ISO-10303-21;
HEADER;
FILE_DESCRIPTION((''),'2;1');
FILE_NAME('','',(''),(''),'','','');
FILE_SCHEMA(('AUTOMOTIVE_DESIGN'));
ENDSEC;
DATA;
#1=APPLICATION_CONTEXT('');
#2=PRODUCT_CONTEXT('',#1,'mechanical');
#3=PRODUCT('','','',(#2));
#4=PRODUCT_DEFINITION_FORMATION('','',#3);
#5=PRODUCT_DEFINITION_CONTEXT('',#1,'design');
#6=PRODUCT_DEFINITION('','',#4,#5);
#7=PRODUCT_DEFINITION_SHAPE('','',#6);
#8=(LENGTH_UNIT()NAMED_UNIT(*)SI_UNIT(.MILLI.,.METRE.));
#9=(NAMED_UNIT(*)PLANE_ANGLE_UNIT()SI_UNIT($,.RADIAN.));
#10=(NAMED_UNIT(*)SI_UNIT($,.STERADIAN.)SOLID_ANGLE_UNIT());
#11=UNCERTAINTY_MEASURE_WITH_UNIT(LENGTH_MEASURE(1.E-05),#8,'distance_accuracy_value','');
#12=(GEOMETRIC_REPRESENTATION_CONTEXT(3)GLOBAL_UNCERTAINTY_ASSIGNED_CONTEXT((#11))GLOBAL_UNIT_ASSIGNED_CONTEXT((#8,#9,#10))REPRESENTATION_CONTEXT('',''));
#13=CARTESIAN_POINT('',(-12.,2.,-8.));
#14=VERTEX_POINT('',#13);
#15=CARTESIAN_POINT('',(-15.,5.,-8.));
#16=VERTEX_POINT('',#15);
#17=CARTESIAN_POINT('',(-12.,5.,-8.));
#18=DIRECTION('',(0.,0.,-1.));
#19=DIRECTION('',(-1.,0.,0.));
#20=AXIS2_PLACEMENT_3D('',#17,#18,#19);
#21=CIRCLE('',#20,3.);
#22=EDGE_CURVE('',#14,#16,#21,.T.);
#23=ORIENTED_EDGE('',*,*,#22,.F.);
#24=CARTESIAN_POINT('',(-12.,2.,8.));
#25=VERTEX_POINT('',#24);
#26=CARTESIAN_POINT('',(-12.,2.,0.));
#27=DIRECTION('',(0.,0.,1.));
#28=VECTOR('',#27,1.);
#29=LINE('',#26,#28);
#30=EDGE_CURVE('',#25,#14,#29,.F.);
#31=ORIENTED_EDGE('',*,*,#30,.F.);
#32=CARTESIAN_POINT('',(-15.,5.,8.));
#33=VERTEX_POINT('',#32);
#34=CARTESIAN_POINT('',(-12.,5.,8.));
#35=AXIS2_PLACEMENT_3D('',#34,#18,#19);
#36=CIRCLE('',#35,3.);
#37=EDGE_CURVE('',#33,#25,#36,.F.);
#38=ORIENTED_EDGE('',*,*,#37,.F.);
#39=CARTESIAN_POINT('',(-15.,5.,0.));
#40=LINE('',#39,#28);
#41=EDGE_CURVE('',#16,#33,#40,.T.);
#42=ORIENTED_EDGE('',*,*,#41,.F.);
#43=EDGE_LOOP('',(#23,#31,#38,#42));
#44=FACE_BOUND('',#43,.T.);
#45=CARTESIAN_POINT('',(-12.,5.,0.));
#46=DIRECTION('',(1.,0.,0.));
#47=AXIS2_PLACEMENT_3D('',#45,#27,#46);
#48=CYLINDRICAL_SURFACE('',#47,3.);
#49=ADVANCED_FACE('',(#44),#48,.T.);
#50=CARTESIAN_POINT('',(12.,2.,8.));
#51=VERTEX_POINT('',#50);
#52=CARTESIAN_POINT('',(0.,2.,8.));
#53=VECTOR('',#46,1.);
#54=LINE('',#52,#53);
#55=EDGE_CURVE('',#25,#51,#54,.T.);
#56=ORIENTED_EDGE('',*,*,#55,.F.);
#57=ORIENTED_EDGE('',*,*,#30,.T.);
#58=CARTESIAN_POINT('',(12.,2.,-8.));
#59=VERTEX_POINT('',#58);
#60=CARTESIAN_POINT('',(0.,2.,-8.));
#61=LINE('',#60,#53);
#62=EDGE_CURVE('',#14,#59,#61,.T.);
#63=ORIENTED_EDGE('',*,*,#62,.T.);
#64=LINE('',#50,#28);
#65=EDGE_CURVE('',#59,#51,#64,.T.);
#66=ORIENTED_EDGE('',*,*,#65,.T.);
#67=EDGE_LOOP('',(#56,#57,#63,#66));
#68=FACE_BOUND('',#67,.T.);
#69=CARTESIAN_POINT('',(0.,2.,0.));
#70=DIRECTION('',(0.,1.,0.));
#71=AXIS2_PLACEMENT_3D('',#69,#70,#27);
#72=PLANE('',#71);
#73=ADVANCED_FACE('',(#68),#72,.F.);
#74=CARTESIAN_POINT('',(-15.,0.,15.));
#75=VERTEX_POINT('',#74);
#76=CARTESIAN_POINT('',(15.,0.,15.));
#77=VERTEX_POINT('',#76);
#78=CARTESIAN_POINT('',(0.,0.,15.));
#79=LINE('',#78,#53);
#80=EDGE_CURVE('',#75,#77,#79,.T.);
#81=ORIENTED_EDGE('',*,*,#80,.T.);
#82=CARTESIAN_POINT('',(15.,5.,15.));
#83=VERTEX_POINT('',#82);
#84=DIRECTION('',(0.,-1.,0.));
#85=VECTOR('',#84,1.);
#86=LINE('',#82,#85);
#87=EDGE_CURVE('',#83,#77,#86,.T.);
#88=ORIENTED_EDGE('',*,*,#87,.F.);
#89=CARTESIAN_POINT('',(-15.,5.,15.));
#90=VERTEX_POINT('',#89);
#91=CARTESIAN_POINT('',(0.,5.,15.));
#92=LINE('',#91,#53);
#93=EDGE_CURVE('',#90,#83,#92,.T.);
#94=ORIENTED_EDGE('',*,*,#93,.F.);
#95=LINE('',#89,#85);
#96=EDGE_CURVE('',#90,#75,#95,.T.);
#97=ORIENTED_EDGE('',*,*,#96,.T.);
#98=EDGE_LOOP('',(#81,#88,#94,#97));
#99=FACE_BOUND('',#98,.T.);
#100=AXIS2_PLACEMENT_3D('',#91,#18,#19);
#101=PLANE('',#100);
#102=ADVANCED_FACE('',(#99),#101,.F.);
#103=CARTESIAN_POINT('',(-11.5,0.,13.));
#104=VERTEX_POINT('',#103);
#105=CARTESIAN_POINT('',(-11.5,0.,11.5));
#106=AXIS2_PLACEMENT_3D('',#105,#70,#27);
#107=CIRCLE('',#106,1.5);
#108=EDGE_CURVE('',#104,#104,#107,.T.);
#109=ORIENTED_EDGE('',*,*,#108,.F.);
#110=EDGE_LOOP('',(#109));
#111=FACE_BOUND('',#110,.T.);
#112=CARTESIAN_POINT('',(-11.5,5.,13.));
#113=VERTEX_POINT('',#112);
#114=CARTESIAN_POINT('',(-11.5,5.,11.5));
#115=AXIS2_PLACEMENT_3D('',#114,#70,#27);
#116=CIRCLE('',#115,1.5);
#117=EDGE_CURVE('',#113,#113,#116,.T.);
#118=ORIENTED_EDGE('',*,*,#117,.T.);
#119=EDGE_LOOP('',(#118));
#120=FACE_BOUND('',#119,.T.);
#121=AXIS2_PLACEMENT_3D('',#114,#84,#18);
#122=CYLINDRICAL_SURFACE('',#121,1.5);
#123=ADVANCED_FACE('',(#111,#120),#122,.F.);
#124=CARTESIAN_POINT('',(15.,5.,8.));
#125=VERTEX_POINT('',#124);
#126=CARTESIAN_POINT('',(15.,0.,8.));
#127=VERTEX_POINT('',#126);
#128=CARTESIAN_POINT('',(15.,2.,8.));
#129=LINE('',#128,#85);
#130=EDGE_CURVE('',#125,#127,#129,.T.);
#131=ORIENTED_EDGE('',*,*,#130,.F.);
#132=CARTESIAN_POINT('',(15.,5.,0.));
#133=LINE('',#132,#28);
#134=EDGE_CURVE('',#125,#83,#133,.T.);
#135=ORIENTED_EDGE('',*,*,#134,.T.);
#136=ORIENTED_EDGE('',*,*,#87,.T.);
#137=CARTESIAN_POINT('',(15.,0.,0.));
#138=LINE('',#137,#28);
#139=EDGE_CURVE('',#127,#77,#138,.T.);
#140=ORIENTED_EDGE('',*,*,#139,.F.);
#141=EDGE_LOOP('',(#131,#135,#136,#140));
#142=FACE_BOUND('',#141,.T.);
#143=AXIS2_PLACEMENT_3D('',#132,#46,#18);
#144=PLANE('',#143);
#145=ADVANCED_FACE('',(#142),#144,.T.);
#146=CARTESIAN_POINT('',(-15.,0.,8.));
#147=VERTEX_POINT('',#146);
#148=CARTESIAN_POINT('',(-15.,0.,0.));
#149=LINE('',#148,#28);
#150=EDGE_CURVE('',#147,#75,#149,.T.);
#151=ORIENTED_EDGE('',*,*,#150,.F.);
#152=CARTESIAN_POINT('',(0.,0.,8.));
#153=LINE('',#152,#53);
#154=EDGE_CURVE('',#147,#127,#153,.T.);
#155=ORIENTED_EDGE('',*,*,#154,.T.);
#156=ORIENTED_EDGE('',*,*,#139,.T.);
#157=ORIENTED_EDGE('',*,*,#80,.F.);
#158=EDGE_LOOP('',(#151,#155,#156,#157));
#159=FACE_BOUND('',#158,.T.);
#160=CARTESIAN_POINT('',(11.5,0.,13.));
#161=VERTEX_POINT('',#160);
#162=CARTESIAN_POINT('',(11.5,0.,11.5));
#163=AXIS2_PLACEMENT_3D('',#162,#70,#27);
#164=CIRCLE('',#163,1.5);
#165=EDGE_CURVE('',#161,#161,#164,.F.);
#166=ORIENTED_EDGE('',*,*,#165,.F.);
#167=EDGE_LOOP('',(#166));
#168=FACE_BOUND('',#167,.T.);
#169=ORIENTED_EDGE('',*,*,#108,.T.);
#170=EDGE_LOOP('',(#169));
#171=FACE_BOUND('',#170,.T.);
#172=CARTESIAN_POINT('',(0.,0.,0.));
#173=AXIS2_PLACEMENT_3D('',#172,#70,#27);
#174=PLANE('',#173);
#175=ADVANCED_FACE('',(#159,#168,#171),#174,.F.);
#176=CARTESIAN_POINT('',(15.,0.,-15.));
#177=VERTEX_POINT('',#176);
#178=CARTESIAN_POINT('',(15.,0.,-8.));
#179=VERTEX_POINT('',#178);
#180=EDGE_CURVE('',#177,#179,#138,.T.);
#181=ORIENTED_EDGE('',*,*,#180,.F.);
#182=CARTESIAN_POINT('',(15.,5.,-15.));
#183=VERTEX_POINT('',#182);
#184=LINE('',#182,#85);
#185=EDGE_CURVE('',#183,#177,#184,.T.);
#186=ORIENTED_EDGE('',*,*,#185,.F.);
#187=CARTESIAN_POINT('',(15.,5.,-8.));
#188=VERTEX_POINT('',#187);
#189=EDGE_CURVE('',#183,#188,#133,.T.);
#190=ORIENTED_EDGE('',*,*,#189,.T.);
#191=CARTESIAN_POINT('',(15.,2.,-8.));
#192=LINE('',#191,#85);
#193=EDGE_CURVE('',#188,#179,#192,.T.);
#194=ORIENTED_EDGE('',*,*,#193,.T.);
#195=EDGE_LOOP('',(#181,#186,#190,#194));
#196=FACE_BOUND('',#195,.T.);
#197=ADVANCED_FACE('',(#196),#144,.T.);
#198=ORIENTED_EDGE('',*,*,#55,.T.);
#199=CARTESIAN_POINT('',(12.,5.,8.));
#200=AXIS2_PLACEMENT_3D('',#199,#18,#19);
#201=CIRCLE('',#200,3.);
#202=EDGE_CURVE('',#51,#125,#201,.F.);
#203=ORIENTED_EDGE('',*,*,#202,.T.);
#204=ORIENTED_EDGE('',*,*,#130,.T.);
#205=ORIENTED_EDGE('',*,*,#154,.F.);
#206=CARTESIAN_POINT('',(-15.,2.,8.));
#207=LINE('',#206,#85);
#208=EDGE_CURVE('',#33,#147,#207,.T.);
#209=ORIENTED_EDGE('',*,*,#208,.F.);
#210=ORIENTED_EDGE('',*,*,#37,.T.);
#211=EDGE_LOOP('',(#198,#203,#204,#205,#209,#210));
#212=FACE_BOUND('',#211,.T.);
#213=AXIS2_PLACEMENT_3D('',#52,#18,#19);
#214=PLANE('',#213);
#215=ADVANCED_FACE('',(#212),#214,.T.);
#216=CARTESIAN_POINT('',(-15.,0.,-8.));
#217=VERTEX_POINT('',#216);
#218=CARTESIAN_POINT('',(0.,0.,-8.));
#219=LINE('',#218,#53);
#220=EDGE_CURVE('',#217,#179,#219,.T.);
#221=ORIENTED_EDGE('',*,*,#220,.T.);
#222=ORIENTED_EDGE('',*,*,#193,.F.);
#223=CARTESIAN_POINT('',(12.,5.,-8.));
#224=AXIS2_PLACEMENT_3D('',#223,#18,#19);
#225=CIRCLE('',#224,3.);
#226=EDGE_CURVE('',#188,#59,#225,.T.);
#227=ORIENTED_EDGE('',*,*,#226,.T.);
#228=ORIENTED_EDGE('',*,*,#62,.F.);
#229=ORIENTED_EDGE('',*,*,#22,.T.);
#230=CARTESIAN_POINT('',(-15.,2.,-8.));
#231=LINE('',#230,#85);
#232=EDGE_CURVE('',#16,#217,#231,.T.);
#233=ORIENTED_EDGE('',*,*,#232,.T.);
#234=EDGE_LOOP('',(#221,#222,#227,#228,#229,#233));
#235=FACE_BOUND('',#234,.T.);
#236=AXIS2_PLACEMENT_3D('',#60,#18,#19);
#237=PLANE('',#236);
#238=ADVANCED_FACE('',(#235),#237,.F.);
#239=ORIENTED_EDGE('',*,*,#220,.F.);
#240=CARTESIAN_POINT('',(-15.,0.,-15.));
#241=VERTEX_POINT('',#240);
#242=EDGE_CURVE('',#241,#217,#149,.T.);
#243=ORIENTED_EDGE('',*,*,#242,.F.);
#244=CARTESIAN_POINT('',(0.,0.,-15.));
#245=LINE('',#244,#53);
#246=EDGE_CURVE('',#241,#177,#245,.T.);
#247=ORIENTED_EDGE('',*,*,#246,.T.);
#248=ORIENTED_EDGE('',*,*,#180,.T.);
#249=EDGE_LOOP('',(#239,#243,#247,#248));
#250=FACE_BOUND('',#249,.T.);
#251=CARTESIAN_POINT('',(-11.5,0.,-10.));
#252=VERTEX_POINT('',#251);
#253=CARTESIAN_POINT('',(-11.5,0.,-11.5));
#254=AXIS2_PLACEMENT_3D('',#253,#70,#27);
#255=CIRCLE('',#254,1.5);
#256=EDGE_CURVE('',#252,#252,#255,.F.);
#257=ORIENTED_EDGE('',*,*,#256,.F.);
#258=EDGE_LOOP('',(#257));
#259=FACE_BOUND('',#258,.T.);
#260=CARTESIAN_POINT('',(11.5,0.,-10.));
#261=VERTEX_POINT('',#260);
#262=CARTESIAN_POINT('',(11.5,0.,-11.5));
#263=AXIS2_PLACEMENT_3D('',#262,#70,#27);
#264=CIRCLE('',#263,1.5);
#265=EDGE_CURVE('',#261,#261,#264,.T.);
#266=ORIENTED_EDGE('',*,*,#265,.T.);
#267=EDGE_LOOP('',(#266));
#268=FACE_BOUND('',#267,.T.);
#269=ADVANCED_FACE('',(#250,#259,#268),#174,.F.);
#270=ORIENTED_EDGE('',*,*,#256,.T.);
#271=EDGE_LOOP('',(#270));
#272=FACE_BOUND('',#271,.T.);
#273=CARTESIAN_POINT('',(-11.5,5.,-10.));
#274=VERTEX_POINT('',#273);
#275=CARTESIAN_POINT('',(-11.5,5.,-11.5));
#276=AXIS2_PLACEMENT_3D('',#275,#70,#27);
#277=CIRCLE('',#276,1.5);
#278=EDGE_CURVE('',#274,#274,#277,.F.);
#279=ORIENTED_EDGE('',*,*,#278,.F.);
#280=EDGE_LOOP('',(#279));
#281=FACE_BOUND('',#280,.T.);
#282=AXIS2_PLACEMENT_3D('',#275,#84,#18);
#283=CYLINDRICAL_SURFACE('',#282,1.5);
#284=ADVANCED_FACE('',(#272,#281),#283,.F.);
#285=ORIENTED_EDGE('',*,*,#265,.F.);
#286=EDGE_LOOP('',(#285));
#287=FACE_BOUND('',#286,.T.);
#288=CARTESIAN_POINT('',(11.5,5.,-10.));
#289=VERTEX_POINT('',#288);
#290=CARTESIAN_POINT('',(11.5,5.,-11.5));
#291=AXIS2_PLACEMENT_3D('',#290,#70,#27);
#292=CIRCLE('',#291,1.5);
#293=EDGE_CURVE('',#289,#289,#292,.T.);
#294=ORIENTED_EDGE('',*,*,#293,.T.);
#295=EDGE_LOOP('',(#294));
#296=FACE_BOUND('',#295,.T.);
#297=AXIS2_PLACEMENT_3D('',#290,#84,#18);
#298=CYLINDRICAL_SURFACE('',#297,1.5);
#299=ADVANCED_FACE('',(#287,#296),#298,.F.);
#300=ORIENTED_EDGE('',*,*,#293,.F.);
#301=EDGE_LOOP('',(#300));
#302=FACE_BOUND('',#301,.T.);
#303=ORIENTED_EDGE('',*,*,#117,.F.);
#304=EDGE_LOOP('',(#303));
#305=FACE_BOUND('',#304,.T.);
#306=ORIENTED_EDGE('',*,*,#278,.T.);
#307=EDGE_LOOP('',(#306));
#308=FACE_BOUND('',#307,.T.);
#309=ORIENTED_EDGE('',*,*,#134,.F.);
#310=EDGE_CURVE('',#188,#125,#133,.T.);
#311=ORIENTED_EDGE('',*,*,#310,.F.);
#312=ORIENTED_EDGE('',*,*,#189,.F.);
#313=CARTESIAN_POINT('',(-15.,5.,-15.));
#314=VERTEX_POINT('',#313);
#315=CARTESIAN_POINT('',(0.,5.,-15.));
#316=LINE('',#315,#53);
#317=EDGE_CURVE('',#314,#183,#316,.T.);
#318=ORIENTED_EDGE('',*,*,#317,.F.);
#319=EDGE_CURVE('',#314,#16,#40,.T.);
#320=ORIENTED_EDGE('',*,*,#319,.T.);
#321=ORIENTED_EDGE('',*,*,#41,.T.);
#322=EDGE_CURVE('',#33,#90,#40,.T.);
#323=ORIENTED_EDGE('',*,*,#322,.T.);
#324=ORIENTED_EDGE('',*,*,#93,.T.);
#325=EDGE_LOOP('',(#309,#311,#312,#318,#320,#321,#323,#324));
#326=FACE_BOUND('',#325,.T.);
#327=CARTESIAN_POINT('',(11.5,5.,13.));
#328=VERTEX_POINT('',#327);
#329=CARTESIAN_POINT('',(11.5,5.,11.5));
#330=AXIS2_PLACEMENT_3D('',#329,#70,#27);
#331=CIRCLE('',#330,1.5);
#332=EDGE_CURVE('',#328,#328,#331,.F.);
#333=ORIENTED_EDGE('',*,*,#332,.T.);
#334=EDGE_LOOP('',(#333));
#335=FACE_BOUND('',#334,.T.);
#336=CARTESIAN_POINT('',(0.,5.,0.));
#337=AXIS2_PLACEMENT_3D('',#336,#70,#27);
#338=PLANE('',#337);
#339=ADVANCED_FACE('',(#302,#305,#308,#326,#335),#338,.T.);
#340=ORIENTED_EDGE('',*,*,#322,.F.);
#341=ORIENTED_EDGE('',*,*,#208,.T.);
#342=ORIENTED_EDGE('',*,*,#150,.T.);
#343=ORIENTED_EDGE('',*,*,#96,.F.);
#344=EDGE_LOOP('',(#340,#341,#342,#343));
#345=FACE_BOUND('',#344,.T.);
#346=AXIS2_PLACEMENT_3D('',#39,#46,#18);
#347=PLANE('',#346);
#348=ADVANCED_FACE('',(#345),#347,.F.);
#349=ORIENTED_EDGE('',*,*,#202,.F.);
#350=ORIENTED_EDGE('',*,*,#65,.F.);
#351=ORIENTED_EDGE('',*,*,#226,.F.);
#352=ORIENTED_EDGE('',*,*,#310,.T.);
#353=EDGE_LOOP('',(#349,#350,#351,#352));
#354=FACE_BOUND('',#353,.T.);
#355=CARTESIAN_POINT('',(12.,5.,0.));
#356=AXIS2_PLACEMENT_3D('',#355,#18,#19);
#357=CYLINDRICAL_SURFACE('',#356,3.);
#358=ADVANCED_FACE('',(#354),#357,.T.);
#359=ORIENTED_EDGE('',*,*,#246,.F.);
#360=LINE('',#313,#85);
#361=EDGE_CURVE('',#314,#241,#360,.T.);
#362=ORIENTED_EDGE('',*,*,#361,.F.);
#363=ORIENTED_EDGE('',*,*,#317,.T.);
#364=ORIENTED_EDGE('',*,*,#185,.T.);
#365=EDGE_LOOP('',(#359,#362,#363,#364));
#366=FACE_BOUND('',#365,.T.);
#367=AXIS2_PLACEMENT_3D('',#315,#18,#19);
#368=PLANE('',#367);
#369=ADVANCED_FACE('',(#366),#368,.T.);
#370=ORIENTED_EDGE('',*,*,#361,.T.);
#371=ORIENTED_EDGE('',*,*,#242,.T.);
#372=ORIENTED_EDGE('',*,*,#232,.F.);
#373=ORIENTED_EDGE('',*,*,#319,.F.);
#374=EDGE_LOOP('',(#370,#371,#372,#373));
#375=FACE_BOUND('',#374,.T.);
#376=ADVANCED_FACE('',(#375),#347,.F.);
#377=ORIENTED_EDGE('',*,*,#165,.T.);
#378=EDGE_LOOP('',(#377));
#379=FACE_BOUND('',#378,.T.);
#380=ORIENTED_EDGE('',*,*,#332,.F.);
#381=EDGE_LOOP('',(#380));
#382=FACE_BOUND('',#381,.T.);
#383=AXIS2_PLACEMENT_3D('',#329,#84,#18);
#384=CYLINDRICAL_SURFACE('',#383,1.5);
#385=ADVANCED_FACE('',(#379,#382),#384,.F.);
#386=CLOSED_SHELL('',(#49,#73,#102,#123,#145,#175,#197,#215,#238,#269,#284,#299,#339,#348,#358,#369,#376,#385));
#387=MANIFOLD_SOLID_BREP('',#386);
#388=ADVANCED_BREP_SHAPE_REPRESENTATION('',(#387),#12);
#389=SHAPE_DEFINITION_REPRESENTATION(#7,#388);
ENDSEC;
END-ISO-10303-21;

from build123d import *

# Parameters (mm, degrees)
SKETCH1_W           = 30
SKETCH1_H           = 16
SKETCH1_H_2         = 7
SKETCH1_R           = 1.5
BOSS_EXTRUDE1_DEPTH = 5
SKETCH1_3_W         = 30
SKETCH1_3_H         = 16
CUT_EXTRUDE1_DEPTH  = 2
FILLET1_R           = 3


with BuildPart() as part:
    # Sketch1 → Boss-Extrude1 (new body)
    # profile 1 of 3: a face of its own
    with BuildSketch(Plane(origin=(0, 0, 0), x_dir=(1, 0, 0), z_dir=(0, 1, 0))):
        Rectangle(SKETCH1_W, SKETCH1_H)
    # profile 2 of 3: a face of its own
    with BuildSketch(Plane(origin=(0, 0, 0), x_dir=(1, 0, 0), z_dir=(0, 1, 0))):
        with Locations((0, 11.5)):
            Rectangle(SKETCH1_W, SKETCH1_H_2)
        with Locations(Location((-11.5, 11.5, 0), (0, 0, 270))):
            Circle(SKETCH1_R, mode=Mode.SUBTRACT)
        with Locations(Location((11.5, 11.5, 0), (0, 0, 270))):
            Circle(SKETCH1_R, mode=Mode.SUBTRACT)
    # profile 3 of 3: a face of its own
    with BuildSketch(Plane(origin=(0, 0, 0), x_dir=(1, 0, 0), z_dir=(0, 1, 0))):
        with Locations((0, -11.5)):
            Rectangle(SKETCH1_W, SKETCH1_H_2)
        with Locations(Location((-11.5, -11.5, 0), (0, 0, 270))):
            Circle(SKETCH1_R, mode=Mode.SUBTRACT)
        with Locations(Location((11.5, -11.5, 0), (0, 0, 270))):
            Circle(SKETCH1_R, mode=Mode.SUBTRACT)
    extrude(amount=BOSS_EXTRUDE1_DEPTH)

    # Sketch1<3> → Cut-Extrude1 (cut)
    with BuildSketch(Plane(origin=(0, 0, 0), x_dir=(1, 0, 0), z_dir=(0, 1, 0))):
        Rectangle(SKETCH1_3_W, SKETCH1_3_H)
    extrude(amount=CUT_EXTRUDE1_DEPTH, mode=Mode.SUBTRACT)

    # Fillet1
    fillet1_edges = [part.edges().sort_by_distance(p)[0] for p in [
        (15, 2, 0),
        (-15, 2, 0),
    ]]
    fillet(fillet1_edges, radius=FILLET1_R - 0.0001)  # a hair under: the kernel refuses the full size


solid = part.part
